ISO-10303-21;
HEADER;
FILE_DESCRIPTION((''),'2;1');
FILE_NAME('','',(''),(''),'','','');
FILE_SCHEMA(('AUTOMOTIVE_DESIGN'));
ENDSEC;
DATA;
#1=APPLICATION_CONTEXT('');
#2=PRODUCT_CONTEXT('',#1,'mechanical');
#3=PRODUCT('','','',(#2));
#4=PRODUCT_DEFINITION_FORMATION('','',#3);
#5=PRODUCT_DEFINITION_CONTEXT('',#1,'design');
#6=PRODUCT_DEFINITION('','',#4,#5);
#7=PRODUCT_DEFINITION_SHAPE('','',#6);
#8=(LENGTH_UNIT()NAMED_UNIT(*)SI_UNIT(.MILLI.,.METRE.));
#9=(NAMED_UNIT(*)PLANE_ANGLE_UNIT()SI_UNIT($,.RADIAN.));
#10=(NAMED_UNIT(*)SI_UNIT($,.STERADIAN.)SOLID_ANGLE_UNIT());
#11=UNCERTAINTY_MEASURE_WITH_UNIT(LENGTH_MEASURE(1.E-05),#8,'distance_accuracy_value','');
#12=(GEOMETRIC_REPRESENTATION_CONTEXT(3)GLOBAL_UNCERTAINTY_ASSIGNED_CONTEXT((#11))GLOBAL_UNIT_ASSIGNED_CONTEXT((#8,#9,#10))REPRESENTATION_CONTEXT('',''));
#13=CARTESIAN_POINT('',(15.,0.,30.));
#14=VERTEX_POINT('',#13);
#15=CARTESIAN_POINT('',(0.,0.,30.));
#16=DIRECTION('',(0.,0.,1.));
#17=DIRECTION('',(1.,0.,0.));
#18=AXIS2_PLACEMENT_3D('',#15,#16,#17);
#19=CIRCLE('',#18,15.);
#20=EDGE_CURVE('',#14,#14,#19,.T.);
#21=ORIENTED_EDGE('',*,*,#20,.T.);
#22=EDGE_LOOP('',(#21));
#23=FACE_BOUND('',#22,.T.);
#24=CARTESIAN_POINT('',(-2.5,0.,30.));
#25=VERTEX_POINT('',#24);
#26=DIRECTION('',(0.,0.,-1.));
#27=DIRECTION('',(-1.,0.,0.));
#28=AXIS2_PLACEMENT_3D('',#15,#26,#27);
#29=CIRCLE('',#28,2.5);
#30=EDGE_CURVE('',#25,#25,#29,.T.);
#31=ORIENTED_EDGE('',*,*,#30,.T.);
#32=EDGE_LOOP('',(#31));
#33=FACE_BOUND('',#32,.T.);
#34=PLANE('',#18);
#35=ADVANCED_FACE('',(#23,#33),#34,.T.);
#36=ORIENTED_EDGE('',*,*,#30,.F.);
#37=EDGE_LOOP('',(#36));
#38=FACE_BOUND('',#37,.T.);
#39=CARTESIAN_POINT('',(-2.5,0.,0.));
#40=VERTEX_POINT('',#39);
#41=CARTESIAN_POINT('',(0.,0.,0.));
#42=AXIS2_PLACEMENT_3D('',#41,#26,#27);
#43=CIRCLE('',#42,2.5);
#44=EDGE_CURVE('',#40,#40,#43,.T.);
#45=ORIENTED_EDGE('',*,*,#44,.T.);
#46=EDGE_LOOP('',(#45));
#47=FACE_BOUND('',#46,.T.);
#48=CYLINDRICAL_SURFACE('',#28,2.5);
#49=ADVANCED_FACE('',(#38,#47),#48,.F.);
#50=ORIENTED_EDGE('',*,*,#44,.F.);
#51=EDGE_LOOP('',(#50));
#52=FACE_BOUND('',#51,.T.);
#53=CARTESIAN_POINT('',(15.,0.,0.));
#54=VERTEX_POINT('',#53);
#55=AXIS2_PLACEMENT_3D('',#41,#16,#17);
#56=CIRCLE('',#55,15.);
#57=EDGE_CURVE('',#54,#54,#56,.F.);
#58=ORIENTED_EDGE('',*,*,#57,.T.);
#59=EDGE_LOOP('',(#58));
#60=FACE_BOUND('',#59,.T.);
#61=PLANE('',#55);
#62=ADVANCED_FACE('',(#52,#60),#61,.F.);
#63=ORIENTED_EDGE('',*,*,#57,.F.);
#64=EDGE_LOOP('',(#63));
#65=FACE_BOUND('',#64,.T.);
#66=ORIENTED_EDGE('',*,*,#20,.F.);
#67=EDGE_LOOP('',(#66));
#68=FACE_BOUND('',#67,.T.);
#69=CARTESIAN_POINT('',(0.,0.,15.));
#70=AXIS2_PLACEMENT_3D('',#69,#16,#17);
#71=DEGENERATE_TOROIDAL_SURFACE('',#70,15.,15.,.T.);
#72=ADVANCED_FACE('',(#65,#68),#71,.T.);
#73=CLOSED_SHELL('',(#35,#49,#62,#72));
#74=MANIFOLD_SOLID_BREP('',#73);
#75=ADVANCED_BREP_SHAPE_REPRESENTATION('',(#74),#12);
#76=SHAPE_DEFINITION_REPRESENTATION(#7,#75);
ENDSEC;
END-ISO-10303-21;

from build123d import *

# Parameters (mm, degrees)
SKETCH1_R           = 30
BOSS_EXTRUDE1_DEPTH = 30
FILLET1_R           = 15
SKETCH2_R           = 2.5
CUT_EXTRUDE1_DEPTH  = 52.961524227


with BuildPart() as part:
    # Sketch1 → Boss-Extrude1 (new body)
    with BuildSketch(Plane.XY):
        Circle(SKETCH1_R)
    extrude(amount=BOSS_EXTRUDE1_DEPTH)

    # Fillet1
    fillet1_edges = [part.edges().sort_by_distance(p)[0] for p in [
        (-30, 0, 0),
        (-30, 0, 30),
    ]]
    fillet(fillet1_edges, radius=FILLET1_R - 0.0001)  # a hair under: the kernel refuses the full size

    # Sketch2 → Cut-Extrude1 (cut, through all)
    with BuildSketch(Plane(origin=(0, 0, 0), x_dir=(-1, 0, 0), z_dir=(0, 0, -1))):
        Circle(SKETCH2_R)
    extrude(amount=-CUT_EXTRUDE1_DEPTH, mode=Mode.SUBTRACT)


solid = part.part
